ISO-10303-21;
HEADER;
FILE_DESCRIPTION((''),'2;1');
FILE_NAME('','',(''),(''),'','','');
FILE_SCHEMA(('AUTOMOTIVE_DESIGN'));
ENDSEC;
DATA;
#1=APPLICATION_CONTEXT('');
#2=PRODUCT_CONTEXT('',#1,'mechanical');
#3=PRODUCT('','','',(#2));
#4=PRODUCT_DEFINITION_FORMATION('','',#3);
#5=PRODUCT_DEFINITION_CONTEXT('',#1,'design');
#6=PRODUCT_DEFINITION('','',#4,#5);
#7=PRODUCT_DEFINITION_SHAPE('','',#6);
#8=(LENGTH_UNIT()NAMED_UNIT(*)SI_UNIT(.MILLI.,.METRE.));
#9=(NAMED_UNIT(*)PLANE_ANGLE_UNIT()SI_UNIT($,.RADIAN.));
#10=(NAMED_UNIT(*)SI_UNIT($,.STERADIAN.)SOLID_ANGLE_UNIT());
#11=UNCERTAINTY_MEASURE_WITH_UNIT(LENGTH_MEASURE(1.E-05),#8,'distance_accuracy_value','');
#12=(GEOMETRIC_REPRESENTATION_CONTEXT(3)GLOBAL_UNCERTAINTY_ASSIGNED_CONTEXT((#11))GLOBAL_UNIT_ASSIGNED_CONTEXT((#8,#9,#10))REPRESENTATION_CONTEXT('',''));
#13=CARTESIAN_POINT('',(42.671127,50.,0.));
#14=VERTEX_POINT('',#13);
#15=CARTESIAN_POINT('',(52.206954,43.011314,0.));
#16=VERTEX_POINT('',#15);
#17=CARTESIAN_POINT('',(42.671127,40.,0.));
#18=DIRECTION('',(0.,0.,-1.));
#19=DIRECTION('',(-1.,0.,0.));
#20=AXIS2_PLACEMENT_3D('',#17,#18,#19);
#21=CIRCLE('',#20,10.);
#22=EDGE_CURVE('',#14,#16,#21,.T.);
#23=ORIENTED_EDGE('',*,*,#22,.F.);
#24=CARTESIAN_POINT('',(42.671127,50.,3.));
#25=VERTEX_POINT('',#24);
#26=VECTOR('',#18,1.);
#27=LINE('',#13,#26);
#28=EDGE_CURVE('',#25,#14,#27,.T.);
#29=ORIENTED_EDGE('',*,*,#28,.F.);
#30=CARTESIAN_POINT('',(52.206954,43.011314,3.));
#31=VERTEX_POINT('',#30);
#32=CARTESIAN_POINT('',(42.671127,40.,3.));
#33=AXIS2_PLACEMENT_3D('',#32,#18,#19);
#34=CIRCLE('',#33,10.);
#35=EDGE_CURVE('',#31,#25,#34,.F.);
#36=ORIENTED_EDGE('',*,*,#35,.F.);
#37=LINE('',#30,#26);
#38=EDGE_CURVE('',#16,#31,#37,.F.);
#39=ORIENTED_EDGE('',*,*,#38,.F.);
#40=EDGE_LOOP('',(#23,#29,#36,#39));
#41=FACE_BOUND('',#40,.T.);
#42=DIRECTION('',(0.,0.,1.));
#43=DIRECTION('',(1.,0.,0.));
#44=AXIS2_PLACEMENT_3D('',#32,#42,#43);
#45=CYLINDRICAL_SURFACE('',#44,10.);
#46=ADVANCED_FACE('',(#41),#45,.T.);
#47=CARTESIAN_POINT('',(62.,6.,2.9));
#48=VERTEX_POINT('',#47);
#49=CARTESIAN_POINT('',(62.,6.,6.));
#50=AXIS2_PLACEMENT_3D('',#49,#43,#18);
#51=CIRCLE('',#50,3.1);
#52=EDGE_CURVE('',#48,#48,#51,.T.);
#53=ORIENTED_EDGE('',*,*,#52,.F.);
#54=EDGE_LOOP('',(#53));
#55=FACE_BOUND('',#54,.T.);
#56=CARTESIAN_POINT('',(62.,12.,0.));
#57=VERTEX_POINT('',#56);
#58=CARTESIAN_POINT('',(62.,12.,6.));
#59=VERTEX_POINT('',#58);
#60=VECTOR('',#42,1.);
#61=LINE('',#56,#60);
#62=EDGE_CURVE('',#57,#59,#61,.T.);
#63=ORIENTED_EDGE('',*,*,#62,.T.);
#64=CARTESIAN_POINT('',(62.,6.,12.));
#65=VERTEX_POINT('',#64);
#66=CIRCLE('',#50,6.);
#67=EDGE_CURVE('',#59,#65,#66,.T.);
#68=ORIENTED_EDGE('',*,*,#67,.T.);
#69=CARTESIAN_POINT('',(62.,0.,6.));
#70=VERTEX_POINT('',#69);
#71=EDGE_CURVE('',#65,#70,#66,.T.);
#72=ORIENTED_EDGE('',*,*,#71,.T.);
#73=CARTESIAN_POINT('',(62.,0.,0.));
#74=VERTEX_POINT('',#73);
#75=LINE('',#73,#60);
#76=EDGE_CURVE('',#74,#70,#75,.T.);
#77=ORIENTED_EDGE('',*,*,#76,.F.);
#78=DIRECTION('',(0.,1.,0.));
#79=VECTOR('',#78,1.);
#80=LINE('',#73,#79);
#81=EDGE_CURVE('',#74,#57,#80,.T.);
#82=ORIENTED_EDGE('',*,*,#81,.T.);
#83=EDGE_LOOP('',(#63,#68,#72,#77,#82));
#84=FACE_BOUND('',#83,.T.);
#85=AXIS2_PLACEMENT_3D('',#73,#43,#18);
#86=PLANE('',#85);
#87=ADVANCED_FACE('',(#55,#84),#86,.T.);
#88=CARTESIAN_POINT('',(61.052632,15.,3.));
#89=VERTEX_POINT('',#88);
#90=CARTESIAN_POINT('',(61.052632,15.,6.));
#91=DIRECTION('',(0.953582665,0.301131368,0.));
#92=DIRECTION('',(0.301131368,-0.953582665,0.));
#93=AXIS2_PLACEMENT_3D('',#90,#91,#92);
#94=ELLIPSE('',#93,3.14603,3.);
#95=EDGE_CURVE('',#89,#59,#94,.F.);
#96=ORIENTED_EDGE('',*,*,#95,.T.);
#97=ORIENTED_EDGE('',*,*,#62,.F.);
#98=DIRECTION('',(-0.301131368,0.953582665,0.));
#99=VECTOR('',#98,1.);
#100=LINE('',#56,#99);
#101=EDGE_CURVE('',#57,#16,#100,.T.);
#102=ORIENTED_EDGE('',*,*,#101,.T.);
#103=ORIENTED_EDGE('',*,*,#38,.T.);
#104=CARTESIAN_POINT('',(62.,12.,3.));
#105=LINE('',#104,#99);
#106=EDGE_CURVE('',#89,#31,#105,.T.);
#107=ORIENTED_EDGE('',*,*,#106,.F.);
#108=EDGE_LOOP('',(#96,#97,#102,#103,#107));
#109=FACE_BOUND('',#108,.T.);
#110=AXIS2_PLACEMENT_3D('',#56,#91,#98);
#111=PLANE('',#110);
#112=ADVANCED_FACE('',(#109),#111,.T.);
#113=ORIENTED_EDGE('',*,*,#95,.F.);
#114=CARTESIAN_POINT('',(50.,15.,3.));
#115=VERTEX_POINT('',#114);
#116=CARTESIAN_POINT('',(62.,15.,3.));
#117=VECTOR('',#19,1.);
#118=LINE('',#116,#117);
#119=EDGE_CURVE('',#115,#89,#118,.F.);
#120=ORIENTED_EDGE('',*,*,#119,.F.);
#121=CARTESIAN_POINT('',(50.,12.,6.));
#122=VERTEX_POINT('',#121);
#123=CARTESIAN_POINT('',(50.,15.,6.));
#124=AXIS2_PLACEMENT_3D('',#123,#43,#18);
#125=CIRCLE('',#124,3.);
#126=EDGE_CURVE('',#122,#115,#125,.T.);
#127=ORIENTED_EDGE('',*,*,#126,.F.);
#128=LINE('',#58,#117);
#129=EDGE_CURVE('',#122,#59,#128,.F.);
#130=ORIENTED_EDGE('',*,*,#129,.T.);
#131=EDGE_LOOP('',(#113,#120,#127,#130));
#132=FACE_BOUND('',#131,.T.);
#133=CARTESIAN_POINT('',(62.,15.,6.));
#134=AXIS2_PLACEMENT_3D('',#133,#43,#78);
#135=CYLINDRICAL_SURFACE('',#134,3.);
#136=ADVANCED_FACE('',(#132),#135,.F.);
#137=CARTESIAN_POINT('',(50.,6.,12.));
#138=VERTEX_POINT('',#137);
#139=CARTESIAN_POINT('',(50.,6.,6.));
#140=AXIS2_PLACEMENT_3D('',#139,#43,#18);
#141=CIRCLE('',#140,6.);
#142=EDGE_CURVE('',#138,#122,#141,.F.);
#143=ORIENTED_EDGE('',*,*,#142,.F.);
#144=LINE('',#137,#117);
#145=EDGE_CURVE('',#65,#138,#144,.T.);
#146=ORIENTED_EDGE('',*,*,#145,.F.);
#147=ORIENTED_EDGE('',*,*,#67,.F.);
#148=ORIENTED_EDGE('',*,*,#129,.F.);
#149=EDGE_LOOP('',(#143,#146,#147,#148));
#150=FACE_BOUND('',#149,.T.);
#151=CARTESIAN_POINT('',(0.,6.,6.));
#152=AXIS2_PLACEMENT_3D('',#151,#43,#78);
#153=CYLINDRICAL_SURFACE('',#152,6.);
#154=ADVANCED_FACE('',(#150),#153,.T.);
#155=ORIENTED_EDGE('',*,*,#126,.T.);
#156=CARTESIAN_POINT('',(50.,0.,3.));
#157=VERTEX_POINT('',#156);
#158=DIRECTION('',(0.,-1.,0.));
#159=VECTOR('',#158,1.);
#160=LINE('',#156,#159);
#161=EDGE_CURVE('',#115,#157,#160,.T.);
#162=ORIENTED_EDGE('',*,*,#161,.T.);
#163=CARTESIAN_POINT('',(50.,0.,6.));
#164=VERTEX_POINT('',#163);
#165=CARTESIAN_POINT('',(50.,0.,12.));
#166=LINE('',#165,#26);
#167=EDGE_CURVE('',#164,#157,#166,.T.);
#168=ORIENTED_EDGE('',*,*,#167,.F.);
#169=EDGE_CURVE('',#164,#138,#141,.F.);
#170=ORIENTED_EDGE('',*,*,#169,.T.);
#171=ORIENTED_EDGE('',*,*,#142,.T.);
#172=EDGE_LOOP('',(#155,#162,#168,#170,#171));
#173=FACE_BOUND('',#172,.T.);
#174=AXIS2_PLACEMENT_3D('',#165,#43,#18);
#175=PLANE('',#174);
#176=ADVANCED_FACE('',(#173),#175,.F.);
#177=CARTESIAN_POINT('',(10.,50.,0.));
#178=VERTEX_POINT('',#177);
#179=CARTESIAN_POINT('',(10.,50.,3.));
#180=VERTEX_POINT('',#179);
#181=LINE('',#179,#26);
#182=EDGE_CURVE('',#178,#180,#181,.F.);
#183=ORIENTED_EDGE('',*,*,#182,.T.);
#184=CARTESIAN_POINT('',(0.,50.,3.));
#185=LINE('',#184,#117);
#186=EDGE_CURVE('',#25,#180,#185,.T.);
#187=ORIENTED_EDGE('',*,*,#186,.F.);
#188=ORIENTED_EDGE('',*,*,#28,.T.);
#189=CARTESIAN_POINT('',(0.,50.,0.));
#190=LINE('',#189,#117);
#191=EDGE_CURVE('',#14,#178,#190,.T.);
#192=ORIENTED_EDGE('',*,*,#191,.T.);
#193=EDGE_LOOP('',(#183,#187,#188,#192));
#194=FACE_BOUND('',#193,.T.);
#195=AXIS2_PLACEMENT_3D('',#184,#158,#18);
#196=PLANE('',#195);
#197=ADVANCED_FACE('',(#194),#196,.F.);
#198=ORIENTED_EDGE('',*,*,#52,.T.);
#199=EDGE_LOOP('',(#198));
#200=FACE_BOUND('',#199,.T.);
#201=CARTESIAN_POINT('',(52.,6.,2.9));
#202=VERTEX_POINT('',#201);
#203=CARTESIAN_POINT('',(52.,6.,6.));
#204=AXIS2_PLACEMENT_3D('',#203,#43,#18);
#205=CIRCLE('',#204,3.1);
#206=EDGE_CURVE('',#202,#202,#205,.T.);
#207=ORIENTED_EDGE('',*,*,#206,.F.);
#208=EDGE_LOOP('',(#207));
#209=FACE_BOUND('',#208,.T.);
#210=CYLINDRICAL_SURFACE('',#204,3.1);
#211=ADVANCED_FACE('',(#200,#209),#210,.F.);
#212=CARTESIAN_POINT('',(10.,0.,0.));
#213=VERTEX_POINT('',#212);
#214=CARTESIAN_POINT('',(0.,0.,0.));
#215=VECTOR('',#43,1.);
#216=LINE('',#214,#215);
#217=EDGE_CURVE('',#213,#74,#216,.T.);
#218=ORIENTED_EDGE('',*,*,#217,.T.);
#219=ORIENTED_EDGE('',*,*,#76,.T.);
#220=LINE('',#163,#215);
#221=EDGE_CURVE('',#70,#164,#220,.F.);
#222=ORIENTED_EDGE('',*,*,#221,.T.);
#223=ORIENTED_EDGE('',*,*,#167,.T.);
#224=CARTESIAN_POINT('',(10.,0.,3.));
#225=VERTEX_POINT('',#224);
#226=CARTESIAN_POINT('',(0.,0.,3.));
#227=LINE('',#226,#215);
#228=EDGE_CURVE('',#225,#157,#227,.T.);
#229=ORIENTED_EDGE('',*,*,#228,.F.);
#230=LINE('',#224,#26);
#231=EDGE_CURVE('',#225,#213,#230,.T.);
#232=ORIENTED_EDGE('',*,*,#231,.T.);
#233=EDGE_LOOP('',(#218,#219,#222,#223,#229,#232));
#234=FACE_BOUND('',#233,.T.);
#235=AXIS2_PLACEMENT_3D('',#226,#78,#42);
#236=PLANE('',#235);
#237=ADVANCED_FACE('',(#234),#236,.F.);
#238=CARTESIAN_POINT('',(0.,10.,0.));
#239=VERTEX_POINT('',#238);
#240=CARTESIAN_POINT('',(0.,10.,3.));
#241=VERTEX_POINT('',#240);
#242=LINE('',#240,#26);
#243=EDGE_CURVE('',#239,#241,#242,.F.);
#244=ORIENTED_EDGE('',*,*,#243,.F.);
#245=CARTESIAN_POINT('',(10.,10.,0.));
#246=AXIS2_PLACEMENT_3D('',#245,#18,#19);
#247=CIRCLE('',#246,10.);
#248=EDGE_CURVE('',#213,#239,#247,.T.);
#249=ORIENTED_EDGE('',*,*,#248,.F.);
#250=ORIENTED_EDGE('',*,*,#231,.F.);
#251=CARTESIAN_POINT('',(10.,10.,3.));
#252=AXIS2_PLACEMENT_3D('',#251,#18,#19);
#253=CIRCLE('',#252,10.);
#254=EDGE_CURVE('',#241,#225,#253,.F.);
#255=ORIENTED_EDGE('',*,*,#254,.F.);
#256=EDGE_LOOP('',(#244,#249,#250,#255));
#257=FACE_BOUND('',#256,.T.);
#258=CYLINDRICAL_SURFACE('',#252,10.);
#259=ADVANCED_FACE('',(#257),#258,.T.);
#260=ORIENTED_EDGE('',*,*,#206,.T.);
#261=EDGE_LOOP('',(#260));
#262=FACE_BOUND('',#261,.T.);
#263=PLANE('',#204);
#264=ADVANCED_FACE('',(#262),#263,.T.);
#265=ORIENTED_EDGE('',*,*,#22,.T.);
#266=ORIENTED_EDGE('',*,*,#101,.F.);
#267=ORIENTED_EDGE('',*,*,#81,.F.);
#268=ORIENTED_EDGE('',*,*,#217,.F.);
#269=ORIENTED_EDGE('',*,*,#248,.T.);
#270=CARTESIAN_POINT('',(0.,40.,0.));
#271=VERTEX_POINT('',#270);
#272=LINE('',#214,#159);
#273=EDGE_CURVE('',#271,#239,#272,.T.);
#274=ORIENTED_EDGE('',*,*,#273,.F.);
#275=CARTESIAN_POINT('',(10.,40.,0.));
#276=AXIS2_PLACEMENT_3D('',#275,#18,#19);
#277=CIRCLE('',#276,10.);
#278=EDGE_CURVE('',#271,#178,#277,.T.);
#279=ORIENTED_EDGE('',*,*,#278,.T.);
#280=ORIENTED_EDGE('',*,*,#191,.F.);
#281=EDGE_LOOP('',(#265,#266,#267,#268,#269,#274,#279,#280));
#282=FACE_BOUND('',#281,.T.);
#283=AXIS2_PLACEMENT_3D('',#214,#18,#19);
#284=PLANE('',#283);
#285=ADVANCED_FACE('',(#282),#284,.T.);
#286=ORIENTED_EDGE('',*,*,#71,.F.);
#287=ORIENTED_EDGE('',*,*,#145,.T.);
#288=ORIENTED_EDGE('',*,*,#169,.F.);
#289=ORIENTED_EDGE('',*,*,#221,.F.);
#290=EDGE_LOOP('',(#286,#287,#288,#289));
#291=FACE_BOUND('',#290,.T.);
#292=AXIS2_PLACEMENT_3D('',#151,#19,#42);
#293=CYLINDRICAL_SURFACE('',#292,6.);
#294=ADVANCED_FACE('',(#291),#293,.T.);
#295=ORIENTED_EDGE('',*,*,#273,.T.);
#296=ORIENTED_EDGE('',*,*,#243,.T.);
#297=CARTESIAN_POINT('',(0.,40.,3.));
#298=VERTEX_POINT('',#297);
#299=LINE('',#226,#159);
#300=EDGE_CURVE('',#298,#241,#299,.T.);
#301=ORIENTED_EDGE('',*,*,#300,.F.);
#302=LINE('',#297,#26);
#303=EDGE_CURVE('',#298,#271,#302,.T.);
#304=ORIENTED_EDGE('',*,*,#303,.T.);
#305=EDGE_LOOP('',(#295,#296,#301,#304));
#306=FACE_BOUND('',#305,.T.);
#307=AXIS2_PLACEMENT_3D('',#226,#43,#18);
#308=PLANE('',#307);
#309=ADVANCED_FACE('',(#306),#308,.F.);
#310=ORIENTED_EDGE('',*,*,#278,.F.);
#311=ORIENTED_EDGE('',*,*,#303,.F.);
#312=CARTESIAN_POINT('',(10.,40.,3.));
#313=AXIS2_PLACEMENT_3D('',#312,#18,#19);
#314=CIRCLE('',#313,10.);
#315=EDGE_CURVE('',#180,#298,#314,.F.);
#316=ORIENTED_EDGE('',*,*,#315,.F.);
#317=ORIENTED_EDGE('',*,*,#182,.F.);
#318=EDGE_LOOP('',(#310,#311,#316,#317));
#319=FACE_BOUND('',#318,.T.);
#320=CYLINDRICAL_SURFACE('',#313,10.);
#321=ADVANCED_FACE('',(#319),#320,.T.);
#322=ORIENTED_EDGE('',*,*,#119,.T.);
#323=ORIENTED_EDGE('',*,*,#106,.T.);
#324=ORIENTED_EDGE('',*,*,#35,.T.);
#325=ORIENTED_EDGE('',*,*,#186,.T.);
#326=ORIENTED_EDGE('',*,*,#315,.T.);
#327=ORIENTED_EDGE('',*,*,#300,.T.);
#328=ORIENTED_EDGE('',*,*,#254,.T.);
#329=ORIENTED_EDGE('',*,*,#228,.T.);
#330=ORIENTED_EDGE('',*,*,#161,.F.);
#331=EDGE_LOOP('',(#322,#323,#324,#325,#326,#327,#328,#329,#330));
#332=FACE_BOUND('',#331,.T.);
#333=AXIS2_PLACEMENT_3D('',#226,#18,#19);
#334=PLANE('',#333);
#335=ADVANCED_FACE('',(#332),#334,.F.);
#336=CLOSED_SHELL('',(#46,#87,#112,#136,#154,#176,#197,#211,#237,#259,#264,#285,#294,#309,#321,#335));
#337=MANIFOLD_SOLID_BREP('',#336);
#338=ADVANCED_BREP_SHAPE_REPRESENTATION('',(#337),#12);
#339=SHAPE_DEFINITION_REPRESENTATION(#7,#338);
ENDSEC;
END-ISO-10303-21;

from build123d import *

# Parameters (mm, degrees)
ESQUISSE1_W             = 50
ESQUISSE1_H             = 50
BOSS_EXTRU_1_DEPTH      = 3
BOSS_EXTRU_2_DEPTH      = 3
ESQUISSE3_W             = 12
ESQUISSE3_H             = 12
BOSS_EXTRU_3_DEPTH      = 9
ESQUISSE4_R             = 3.1
ENL_V_MAT_EXTRU_1_DEPTH = 10
CONG_1_R                = 6
CONG_2_R                = 3
CONG_3_R                = 10


with BuildPart() as part:
    # Esquisse1 → Boss.-Extru.1 (new body)
    with BuildSketch(Plane.XY):
        with Locations((25, 25)):
            Rectangle(ESQUISSE1_W, ESQUISSE1_H)
    extrude(amount=BOSS_EXTRU_1_DEPTH)

    # Esquisse2 → Boss.-Extru.2 (add)
    with BuildSketch(Plane.XY.offset(3)):
        Polygon((50, 0), (62, 0), (62, 12), (50, 50), align=None)
    extrude(amount=-BOSS_EXTRU_2_DEPTH)

    # Esquisse3 → Boss.-Extru.3 (add)
    with BuildSketch(Plane.XY.offset(3)):
        with Locations((56, 6)):
            Rectangle(ESQUISSE3_W, ESQUISSE3_H)
    extrude(amount=BOSS_EXTRU_3_DEPTH)

    # Esquisse4 → Enlèv. mat.-Extru.1 (cut)
    with BuildSketch(Plane(origin=(62, 0, 0), x_dir=(0, 0, -1), z_dir=(1, 0, 0))):
        with Locations((-6, 6)):
            Circle(ESQUISSE4_R)
    extrude(amount=-ENL_V_MAT_EXTRU_1_DEPTH, mode=Mode.SUBTRACT)

    # Congé1
    cong_1_edges = [part.edges().sort_by_distance(p)[0] for p in [
        (56, 0, 12),
        (56, 12, 12),
    ]]
    fillet(cong_1_edges, radius=CONG_1_R - 0.0001)  # a hair under: the kernel refuses the full size

    # Congé2
    cong_2_edges = [part.edges().sort_by_distance(p)[0] for p in [
        (56, 12, 3),
    ]]
    fillet(cong_2_edges, radius=CONG_2_R)

    # Congé3
    cong_3_edges = [part.edges().sort_by_distance(p)[0] for p in [
        (0, 0, 1.5),
        (0, 50, 1.5),
        (50, 50, 1.5),
    ]]
    fillet(cong_3_edges, radius=CONG_3_R)


solid = part.part
